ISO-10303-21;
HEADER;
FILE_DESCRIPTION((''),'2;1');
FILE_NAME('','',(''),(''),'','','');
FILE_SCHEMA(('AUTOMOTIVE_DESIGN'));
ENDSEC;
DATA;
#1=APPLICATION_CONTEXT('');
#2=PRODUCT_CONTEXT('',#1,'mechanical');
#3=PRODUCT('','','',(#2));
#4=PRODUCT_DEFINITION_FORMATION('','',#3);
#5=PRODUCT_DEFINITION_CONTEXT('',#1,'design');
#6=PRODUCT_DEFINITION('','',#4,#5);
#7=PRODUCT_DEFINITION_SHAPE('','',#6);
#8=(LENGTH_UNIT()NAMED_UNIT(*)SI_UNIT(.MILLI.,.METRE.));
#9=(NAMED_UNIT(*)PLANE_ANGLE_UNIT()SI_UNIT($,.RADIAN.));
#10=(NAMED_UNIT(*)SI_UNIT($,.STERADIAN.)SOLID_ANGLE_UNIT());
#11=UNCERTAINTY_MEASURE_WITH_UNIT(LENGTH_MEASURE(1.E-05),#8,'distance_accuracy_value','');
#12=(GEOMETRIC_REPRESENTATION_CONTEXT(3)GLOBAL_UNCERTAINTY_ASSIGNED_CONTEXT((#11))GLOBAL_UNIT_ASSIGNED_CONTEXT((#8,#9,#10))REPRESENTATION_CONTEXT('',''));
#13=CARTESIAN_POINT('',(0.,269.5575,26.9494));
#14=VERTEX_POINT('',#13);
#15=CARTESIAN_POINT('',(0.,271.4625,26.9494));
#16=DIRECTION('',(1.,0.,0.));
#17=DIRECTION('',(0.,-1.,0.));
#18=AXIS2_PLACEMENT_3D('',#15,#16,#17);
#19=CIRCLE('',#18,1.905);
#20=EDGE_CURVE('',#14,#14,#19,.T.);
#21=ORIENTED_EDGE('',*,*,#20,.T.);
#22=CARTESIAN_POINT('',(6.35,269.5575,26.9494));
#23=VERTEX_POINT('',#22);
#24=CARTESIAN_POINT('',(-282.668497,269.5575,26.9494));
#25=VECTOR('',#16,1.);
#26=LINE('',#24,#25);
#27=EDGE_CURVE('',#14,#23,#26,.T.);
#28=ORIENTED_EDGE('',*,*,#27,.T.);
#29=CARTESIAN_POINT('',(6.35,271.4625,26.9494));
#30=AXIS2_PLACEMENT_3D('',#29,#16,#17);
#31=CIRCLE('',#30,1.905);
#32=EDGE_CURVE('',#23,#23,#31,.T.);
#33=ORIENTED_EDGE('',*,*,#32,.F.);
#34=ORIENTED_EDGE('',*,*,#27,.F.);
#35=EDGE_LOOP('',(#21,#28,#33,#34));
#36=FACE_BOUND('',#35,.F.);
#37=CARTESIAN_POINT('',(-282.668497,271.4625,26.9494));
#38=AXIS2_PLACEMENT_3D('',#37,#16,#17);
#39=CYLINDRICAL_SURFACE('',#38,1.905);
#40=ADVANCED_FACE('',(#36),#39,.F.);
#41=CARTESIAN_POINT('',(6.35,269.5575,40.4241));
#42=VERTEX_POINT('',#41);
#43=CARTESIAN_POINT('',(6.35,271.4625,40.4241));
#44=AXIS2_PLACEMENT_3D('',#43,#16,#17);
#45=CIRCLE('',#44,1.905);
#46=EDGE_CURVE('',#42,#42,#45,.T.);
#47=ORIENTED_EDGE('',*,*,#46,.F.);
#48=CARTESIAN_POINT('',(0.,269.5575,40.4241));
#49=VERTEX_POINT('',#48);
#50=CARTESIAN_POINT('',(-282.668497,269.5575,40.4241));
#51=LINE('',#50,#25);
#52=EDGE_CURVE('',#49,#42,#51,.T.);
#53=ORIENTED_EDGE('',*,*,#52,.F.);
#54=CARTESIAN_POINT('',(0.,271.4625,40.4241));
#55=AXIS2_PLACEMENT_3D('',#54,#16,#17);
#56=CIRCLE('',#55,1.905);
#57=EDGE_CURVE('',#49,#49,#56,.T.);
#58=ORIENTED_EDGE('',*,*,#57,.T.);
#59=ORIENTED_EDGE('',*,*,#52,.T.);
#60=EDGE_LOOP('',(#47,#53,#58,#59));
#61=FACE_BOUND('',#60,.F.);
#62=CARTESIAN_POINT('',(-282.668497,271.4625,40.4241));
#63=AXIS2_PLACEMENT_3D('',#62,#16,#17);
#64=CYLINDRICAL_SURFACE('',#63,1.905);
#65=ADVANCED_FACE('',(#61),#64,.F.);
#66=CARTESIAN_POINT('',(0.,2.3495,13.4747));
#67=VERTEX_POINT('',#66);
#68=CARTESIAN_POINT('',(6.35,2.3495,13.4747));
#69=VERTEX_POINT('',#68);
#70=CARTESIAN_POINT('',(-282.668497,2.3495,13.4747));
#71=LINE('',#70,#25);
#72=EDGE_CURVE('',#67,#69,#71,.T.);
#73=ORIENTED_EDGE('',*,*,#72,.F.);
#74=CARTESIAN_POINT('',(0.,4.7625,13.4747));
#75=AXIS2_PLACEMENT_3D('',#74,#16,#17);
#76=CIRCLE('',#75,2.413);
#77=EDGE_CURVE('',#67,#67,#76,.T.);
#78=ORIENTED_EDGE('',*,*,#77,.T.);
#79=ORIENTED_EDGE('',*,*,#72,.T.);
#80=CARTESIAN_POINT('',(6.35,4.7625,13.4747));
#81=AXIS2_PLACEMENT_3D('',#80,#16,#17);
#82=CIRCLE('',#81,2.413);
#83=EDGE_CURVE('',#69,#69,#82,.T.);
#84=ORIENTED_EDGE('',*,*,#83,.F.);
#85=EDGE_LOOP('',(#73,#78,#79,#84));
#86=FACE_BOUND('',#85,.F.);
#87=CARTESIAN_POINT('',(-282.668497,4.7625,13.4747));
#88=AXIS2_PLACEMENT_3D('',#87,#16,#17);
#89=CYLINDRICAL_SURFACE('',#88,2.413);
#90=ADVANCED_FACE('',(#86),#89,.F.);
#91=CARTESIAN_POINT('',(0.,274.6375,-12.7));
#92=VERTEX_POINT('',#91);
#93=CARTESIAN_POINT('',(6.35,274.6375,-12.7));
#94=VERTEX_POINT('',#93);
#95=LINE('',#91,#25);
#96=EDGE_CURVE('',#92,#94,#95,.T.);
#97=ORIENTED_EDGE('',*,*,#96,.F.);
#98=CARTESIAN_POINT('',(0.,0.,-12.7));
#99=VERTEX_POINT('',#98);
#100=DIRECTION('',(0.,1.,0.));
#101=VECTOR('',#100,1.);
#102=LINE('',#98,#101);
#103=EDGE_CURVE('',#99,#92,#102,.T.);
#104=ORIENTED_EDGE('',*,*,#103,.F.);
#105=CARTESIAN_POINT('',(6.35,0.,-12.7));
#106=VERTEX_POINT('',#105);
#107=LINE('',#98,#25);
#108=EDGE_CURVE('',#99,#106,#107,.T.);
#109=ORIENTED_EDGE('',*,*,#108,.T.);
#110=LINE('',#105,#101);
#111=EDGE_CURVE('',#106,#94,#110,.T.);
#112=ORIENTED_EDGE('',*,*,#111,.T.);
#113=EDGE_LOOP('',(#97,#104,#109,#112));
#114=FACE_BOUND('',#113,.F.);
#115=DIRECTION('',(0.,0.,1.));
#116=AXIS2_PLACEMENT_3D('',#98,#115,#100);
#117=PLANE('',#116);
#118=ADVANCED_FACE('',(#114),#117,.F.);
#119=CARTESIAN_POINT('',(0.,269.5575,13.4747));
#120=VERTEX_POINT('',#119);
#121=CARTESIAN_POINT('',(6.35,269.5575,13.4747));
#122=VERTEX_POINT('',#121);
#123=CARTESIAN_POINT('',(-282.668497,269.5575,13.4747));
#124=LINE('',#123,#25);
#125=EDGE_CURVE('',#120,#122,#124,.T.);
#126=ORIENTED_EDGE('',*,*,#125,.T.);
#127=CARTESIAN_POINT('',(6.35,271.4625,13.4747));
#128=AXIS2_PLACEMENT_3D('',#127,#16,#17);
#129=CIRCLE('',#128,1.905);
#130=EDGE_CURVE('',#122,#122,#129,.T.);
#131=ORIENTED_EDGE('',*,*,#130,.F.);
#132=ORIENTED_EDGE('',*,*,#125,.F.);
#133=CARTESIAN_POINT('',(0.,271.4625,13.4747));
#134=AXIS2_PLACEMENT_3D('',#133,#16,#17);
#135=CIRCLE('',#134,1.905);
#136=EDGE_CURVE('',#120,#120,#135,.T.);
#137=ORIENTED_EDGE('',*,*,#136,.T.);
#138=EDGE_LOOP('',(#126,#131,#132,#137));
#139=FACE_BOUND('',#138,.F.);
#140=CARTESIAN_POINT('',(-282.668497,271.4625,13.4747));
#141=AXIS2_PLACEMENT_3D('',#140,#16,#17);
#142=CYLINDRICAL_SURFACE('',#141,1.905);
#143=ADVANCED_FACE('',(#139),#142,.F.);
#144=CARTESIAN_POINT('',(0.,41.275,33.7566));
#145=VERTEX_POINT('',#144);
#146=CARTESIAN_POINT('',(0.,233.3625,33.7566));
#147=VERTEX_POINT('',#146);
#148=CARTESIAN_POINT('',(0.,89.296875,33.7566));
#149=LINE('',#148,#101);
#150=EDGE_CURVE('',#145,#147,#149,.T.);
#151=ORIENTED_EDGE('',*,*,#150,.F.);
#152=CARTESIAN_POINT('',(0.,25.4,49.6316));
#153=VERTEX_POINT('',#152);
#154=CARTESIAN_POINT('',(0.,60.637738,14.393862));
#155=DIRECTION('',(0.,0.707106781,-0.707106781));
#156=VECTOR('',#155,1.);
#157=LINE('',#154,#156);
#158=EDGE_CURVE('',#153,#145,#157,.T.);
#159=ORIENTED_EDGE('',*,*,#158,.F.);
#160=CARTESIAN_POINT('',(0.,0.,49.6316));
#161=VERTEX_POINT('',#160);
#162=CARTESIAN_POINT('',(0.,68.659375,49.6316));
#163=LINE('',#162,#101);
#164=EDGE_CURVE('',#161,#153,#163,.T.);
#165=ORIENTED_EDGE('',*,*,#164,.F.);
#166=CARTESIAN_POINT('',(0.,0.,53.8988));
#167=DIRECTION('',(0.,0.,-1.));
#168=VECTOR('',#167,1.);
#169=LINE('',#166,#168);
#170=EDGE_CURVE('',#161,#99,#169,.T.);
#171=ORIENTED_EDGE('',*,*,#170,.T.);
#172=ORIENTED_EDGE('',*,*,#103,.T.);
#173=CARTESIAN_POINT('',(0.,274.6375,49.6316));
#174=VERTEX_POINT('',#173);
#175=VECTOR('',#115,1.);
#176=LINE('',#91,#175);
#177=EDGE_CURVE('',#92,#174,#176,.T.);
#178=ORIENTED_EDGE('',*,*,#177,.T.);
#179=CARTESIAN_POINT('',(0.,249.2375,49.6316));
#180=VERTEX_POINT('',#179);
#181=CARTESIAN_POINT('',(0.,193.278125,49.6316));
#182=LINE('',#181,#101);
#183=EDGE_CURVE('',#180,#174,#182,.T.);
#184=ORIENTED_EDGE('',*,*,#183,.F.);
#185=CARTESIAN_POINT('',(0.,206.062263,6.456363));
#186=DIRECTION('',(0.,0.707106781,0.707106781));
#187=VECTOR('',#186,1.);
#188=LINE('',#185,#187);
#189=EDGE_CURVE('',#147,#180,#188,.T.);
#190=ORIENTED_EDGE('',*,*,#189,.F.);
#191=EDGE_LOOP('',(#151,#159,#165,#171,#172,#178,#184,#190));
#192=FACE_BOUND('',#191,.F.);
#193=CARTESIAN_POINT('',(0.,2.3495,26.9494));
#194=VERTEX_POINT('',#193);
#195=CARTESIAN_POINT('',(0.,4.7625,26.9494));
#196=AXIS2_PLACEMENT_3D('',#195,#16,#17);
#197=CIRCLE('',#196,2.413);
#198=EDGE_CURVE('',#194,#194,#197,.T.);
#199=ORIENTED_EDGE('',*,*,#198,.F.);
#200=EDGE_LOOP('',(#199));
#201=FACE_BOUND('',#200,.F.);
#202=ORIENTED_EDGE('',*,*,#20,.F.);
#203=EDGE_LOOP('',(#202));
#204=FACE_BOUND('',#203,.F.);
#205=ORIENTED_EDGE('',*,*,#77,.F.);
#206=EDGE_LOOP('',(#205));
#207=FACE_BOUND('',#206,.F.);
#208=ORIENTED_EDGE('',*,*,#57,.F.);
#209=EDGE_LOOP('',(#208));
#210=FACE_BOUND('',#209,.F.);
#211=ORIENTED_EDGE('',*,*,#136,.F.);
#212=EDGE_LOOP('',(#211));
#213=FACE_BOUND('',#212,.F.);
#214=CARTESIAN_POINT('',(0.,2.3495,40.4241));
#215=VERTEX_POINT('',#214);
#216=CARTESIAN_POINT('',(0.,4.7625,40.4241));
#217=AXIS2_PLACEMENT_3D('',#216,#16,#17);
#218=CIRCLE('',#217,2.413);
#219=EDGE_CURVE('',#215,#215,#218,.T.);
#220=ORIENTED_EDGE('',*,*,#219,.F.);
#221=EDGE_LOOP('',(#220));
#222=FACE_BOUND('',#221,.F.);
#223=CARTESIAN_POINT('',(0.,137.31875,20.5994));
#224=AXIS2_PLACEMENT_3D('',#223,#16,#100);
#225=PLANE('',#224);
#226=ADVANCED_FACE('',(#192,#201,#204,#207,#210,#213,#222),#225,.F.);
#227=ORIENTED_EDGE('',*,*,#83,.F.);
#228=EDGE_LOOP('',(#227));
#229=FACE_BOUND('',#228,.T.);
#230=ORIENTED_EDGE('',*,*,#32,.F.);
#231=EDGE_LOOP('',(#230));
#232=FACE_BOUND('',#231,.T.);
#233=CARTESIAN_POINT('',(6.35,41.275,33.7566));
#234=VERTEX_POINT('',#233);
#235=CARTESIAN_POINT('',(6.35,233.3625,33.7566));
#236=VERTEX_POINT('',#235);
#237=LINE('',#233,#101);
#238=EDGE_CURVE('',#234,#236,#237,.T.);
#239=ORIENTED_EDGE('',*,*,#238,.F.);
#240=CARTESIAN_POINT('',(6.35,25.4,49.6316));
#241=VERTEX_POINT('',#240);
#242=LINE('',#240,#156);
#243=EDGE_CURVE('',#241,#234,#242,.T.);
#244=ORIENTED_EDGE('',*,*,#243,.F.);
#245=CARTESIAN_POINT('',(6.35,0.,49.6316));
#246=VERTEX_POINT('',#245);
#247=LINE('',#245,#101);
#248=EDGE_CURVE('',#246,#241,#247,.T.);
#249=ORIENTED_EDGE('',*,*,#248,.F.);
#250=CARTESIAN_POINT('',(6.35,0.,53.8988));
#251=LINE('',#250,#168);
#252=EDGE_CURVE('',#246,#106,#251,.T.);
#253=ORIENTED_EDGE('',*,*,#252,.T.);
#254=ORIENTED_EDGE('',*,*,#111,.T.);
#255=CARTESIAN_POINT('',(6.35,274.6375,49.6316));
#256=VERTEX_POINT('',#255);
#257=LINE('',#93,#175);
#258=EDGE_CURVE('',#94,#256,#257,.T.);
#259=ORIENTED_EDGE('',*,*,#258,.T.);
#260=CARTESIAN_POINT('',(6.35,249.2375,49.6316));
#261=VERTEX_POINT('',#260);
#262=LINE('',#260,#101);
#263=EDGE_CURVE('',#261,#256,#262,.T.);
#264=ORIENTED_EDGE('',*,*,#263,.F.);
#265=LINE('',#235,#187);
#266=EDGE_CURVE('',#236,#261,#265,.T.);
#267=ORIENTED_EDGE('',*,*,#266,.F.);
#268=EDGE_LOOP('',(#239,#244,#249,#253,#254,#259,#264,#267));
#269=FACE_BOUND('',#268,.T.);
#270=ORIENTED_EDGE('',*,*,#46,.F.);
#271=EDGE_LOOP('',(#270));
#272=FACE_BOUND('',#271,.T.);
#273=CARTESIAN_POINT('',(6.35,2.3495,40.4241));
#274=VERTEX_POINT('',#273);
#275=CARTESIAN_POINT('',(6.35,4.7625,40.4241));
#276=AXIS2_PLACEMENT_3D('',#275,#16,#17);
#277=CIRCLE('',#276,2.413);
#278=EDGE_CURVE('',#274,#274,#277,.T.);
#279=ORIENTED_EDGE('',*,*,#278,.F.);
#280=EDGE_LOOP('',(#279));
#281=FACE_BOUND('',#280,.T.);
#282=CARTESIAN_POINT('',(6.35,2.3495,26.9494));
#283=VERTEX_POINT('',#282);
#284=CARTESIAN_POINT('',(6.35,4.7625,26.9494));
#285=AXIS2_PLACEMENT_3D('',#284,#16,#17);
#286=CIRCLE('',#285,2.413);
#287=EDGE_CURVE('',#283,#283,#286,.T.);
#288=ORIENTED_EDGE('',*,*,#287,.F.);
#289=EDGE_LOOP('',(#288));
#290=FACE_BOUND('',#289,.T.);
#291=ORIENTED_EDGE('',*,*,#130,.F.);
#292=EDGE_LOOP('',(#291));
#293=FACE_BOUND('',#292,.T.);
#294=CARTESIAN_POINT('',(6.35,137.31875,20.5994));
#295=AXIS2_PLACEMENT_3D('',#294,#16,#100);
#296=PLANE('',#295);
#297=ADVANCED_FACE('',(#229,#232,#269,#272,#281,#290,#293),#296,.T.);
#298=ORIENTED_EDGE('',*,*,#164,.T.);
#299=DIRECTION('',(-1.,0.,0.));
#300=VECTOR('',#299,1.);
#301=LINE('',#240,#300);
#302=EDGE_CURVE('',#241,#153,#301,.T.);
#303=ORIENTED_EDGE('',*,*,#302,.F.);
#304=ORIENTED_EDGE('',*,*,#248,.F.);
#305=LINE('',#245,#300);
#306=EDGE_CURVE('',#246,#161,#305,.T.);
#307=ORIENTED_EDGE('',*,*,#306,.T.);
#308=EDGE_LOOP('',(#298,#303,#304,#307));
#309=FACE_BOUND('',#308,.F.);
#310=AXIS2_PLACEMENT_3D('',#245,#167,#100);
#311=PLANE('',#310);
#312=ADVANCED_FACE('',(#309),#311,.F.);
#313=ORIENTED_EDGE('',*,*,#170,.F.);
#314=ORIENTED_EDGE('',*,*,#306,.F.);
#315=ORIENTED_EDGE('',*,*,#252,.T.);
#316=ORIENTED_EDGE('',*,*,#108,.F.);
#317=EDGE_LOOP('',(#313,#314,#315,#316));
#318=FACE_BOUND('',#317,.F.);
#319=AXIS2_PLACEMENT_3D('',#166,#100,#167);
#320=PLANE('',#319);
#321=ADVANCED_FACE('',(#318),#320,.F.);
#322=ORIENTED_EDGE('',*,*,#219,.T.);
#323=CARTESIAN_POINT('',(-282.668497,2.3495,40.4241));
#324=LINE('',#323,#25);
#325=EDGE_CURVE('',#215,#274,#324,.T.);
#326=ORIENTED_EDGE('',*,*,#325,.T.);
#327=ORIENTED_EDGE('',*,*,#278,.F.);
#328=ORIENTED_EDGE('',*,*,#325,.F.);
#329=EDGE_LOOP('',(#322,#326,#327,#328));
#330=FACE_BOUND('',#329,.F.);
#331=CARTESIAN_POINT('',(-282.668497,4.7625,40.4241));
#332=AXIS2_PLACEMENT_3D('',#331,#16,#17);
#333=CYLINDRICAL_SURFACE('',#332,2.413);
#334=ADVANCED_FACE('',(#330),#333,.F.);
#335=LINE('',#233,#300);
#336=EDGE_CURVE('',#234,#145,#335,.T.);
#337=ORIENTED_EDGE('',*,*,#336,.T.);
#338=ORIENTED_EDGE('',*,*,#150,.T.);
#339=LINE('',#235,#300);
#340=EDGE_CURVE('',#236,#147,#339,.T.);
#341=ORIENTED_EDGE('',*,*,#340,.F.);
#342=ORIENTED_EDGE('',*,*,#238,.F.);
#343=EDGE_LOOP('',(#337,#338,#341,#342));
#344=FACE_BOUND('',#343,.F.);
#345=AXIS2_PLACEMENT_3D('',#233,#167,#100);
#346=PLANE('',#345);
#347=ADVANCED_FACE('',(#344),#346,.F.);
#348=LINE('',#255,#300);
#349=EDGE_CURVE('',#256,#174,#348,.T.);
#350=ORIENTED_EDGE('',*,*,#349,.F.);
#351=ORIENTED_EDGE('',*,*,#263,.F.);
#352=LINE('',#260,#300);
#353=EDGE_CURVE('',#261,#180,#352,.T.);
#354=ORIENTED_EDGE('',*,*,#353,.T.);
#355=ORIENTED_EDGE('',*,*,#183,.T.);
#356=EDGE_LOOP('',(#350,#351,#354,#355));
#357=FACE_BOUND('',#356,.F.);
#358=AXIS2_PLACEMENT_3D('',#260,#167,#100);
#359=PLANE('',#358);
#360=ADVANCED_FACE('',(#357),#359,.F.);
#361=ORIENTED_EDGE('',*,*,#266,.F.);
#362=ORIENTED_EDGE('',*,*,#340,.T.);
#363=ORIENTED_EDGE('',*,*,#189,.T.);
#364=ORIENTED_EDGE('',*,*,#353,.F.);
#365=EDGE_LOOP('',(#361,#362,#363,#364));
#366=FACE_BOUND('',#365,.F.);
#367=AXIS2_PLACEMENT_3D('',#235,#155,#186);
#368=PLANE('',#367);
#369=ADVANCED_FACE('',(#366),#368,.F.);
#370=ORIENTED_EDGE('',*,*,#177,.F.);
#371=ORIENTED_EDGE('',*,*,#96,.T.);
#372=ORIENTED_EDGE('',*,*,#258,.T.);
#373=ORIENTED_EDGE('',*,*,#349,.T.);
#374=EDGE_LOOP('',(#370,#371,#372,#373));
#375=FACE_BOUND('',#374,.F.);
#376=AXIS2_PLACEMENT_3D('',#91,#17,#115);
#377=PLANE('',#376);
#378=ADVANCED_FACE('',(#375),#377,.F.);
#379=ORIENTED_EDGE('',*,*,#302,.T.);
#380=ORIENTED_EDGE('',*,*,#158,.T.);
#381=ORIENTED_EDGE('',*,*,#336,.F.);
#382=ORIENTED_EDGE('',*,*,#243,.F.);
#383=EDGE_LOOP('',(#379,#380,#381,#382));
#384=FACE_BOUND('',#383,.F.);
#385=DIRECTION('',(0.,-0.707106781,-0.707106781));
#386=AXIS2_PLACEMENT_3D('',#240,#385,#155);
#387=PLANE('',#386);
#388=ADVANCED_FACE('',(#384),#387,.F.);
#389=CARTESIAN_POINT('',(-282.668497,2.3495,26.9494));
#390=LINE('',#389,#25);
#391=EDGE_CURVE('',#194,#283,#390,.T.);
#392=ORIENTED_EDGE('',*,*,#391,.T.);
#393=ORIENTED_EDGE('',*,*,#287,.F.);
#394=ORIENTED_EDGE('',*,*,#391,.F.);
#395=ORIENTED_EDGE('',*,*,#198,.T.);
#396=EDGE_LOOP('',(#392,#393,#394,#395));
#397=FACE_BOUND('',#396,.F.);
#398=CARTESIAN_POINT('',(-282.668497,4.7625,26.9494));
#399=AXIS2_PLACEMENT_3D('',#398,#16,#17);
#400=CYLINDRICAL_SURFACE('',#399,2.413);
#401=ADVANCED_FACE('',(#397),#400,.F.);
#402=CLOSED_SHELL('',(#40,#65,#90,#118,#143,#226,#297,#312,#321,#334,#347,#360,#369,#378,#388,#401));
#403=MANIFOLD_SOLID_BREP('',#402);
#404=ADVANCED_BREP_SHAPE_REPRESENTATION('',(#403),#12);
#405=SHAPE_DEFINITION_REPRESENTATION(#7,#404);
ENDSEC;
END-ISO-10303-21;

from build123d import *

# Parameters (mm, degrees)
F1_DEPTH = 6.35
F2_D     = 4.826
F3_D     = 3.81
F5_DEPTH = 25.4


# Not quite as in the source:
# - a feature names something its author has since deleted; it is built from what else it names


with BuildPart() as f1:
    # F0 (on Right) → F1 (new body)
    with BuildSketch(Plane.YZ):
        Polygon((274.6375, -12.7), (274.6375, 0), (274.6375, 53.8988), (0, 53.8988), (0, 0), (0, -12.7), align=None)
    extrude(amount=F1_DEPTH)

    # F2 (through all)
    with Locations(Plane(origin=(0, 0, 0), x_dir=(0, 1, 0), z_dir=(-1, 0, 0))):
        with Locations((4.7625, -40.4241), (4.7625, -26.9494), (4.7625, -13.4747)):
            Hole(F2_D / 2)

    # F3 (through all)
    with Locations(Plane(origin=(0, 0, 0), x_dir=(0, 1, 0), z_dir=(-1, 0, 0))):
        with Locations((271.4625, -40.4241), (271.4625, -26.9494), (271.4625, -13.4747)):
            Hole(F3_D / 2)

    # F4 (on face) → F5 (cut)
    with BuildSketch(Plane.YZ.offset(6.35)):
        Polygon((0, 53.8988), (0, 49.6316), (25.4, 49.6316), (41.275, 33.7566), (233.3625, 33.7566), (249.2375, 49.6316), (274.6375, 49.6316), (274.6375, 53.8988), align=None)
    extrude(amount=-F5_DEPTH, mode=Mode.SUBTRACT)


solid = f1.part
